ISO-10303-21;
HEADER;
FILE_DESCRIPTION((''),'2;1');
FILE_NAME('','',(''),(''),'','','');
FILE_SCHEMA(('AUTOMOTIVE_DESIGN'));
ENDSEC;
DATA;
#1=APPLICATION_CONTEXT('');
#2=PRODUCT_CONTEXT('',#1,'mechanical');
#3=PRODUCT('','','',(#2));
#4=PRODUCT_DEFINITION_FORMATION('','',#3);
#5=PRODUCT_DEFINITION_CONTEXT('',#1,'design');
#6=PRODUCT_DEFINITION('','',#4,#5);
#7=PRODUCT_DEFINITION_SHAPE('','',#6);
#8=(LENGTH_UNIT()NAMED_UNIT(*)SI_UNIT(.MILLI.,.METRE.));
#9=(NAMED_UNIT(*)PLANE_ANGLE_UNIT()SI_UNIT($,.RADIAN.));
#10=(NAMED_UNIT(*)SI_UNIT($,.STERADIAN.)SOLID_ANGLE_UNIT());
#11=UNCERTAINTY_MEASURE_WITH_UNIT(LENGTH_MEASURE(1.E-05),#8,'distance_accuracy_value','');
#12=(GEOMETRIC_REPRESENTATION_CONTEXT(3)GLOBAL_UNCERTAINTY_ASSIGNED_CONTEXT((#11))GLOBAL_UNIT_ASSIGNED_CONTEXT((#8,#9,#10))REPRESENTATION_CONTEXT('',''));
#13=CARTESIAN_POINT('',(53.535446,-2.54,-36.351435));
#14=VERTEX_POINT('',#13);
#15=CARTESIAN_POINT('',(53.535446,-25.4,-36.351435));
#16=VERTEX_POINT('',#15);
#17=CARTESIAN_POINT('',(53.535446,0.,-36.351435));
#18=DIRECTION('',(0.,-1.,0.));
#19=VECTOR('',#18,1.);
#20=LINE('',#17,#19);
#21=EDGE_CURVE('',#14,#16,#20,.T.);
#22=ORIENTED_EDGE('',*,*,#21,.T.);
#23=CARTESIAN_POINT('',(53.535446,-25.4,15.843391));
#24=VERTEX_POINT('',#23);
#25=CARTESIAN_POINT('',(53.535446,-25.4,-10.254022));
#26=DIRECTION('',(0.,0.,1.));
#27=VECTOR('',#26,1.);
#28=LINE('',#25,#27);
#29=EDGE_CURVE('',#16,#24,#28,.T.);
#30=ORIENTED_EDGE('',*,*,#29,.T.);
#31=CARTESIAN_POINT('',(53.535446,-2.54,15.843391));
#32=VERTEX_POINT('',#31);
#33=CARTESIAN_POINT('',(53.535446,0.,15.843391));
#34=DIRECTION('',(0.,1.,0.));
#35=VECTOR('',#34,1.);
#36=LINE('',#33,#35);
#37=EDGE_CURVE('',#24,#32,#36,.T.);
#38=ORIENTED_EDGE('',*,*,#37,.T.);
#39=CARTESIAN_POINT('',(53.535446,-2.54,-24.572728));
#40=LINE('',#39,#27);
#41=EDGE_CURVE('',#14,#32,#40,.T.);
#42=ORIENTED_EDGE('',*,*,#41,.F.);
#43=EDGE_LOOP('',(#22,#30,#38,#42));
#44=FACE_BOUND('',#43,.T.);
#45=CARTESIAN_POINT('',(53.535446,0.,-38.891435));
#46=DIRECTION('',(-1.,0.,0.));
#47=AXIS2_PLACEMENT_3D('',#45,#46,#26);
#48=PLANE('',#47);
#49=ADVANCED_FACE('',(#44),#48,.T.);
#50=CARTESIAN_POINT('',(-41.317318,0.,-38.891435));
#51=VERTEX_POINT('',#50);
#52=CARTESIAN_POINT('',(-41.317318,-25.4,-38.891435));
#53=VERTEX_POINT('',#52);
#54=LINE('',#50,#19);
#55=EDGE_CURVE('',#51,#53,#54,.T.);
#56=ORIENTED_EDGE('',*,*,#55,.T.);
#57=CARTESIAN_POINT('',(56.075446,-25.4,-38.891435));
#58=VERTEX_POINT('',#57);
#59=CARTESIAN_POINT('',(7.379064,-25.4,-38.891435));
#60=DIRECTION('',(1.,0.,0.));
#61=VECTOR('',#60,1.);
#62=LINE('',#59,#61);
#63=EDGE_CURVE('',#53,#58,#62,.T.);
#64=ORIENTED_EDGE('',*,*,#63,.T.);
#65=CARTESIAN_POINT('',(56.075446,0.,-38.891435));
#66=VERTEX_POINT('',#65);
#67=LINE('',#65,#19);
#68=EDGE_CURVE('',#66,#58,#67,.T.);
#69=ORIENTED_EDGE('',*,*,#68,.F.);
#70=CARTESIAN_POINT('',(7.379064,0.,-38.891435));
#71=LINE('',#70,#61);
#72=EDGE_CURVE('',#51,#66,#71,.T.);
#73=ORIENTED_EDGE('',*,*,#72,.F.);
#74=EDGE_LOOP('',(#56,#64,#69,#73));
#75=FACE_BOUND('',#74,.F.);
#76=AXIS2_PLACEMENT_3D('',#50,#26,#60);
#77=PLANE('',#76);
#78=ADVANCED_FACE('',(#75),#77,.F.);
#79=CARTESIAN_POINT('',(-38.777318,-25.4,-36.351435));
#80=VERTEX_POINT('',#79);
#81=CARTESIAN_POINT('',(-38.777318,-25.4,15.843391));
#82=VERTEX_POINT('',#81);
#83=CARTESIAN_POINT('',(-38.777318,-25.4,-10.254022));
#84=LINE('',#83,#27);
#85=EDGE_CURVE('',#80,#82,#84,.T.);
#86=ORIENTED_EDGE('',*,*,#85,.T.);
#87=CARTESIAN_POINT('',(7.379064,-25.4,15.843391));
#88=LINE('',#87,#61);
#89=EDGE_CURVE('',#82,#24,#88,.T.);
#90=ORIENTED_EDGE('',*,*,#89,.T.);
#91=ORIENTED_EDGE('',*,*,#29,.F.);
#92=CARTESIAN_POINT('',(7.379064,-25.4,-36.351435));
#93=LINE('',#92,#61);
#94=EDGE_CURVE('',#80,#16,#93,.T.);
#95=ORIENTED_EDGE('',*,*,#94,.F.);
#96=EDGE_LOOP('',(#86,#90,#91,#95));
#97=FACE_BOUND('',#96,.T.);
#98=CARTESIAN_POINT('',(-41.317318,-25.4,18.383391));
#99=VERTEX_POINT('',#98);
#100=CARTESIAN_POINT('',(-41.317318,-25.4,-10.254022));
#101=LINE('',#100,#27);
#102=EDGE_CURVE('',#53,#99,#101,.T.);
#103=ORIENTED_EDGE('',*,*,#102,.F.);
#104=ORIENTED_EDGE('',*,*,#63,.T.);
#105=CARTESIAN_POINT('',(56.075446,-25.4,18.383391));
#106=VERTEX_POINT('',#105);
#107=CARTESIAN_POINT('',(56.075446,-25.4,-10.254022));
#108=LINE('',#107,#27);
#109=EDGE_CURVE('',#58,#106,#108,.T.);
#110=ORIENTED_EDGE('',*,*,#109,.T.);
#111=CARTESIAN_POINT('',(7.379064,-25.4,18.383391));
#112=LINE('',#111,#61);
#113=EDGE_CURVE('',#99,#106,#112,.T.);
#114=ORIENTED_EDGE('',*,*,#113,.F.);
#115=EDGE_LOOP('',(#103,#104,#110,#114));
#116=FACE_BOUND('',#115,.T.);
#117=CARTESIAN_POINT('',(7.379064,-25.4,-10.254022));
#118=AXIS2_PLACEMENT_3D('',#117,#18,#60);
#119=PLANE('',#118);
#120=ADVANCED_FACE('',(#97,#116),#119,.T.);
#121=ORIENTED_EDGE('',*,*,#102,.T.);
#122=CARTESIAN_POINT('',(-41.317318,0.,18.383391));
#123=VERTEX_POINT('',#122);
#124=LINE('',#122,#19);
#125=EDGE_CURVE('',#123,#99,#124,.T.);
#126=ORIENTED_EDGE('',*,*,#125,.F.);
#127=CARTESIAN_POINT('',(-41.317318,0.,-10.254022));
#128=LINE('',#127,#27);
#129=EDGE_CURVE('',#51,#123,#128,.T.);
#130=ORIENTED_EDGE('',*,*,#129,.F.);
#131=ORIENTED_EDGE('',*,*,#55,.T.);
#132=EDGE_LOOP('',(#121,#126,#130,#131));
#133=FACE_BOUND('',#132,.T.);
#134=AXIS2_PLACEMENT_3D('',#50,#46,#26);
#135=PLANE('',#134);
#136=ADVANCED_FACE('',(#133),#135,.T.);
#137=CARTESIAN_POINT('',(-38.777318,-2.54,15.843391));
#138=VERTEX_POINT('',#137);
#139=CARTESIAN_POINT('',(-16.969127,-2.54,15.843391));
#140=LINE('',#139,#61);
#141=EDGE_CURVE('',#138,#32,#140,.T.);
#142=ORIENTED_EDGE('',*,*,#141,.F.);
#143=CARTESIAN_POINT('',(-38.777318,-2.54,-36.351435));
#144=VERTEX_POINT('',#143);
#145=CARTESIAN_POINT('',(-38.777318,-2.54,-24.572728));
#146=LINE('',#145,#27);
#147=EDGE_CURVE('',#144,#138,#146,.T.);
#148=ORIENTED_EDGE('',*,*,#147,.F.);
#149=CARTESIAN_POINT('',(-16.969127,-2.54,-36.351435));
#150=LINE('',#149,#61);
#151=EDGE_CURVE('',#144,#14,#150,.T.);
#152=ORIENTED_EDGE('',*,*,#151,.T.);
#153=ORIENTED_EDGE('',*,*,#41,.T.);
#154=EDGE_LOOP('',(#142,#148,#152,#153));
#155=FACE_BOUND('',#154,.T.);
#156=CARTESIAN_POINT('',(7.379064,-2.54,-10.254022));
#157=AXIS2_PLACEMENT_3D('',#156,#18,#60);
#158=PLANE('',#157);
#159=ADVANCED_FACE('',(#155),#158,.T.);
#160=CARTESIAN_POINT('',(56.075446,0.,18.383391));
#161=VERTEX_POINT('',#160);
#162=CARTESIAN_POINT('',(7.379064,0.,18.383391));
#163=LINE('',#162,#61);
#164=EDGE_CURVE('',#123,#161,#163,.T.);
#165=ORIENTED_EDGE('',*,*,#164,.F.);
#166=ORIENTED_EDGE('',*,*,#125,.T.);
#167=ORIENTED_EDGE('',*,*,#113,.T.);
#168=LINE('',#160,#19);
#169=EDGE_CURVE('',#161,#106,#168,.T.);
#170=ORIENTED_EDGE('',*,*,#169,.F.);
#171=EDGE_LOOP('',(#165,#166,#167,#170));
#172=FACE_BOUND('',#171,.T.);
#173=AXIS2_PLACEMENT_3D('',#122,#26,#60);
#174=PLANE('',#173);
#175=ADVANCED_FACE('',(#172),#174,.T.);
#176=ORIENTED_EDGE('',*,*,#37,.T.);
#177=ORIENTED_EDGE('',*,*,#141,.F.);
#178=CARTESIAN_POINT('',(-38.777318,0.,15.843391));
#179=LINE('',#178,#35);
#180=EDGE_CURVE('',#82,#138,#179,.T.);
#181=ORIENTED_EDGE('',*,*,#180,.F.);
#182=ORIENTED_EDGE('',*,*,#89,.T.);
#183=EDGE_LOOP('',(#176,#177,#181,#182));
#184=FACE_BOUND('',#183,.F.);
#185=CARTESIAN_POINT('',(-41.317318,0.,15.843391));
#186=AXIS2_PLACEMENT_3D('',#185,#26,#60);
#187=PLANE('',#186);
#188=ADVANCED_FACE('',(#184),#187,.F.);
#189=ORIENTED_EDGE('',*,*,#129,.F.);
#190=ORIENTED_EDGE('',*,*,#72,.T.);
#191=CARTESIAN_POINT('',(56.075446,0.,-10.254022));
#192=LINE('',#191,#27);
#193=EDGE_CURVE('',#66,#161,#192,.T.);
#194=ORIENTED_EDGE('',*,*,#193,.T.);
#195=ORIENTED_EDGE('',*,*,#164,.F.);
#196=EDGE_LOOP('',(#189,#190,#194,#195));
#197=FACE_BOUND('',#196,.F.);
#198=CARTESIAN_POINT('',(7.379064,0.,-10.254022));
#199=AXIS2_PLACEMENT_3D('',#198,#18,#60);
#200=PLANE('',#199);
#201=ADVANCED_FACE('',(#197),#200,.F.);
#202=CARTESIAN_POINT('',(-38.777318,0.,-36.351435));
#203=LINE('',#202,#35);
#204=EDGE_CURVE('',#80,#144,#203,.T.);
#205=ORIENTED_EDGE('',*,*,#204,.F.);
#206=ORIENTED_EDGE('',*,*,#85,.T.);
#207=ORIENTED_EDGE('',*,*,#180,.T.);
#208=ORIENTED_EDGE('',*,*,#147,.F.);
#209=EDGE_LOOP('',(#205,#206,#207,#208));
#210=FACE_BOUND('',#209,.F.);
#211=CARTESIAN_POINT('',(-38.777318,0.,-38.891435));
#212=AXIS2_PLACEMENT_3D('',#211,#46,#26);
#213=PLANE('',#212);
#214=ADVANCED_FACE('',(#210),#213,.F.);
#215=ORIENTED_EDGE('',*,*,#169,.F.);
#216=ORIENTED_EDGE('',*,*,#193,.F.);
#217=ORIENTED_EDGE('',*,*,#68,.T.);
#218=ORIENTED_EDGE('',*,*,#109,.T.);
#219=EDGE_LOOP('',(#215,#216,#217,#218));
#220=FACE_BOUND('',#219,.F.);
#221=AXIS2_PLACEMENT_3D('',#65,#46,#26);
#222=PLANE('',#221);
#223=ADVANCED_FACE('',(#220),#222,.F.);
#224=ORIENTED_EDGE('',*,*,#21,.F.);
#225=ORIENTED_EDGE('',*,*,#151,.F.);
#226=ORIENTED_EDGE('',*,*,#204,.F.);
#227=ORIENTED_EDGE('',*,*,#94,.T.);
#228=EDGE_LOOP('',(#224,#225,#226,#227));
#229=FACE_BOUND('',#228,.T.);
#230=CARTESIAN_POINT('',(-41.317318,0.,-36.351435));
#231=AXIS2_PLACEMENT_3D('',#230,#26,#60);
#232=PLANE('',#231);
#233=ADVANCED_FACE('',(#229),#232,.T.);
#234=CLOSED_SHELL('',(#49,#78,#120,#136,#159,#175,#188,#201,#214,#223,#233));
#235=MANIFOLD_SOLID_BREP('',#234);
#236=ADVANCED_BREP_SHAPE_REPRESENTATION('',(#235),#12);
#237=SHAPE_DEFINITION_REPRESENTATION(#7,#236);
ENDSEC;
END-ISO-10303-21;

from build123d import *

# Parameters (mm, degrees)
F0_W     = 97.3927639425
F0_H     = 57.274825871
F1_DEPTH = 25.4
F2_T     = -2.54


# Not quite as in the source:
# - the program builds the solid bodies; features that only make, move or delete a surface that nothing else refers to are left out


with BuildPart() as f1:
    # F0 (on Front) → F1 (new body)
    with BuildSketch(Plane.XZ):
        with Locations((7.3790643364, -10.254021734)):
            Rectangle(F0_W, F0_H)
    extrude(amount=F1_DEPTH)

    # F2
    f2_openings = [f1.faces().sort_by_distance(p)[0] for p in [
        (7.379064, -25.4, -10.254022),
    ]]
    offset(amount=F2_T, openings=f2_openings)


solid = f1.part
